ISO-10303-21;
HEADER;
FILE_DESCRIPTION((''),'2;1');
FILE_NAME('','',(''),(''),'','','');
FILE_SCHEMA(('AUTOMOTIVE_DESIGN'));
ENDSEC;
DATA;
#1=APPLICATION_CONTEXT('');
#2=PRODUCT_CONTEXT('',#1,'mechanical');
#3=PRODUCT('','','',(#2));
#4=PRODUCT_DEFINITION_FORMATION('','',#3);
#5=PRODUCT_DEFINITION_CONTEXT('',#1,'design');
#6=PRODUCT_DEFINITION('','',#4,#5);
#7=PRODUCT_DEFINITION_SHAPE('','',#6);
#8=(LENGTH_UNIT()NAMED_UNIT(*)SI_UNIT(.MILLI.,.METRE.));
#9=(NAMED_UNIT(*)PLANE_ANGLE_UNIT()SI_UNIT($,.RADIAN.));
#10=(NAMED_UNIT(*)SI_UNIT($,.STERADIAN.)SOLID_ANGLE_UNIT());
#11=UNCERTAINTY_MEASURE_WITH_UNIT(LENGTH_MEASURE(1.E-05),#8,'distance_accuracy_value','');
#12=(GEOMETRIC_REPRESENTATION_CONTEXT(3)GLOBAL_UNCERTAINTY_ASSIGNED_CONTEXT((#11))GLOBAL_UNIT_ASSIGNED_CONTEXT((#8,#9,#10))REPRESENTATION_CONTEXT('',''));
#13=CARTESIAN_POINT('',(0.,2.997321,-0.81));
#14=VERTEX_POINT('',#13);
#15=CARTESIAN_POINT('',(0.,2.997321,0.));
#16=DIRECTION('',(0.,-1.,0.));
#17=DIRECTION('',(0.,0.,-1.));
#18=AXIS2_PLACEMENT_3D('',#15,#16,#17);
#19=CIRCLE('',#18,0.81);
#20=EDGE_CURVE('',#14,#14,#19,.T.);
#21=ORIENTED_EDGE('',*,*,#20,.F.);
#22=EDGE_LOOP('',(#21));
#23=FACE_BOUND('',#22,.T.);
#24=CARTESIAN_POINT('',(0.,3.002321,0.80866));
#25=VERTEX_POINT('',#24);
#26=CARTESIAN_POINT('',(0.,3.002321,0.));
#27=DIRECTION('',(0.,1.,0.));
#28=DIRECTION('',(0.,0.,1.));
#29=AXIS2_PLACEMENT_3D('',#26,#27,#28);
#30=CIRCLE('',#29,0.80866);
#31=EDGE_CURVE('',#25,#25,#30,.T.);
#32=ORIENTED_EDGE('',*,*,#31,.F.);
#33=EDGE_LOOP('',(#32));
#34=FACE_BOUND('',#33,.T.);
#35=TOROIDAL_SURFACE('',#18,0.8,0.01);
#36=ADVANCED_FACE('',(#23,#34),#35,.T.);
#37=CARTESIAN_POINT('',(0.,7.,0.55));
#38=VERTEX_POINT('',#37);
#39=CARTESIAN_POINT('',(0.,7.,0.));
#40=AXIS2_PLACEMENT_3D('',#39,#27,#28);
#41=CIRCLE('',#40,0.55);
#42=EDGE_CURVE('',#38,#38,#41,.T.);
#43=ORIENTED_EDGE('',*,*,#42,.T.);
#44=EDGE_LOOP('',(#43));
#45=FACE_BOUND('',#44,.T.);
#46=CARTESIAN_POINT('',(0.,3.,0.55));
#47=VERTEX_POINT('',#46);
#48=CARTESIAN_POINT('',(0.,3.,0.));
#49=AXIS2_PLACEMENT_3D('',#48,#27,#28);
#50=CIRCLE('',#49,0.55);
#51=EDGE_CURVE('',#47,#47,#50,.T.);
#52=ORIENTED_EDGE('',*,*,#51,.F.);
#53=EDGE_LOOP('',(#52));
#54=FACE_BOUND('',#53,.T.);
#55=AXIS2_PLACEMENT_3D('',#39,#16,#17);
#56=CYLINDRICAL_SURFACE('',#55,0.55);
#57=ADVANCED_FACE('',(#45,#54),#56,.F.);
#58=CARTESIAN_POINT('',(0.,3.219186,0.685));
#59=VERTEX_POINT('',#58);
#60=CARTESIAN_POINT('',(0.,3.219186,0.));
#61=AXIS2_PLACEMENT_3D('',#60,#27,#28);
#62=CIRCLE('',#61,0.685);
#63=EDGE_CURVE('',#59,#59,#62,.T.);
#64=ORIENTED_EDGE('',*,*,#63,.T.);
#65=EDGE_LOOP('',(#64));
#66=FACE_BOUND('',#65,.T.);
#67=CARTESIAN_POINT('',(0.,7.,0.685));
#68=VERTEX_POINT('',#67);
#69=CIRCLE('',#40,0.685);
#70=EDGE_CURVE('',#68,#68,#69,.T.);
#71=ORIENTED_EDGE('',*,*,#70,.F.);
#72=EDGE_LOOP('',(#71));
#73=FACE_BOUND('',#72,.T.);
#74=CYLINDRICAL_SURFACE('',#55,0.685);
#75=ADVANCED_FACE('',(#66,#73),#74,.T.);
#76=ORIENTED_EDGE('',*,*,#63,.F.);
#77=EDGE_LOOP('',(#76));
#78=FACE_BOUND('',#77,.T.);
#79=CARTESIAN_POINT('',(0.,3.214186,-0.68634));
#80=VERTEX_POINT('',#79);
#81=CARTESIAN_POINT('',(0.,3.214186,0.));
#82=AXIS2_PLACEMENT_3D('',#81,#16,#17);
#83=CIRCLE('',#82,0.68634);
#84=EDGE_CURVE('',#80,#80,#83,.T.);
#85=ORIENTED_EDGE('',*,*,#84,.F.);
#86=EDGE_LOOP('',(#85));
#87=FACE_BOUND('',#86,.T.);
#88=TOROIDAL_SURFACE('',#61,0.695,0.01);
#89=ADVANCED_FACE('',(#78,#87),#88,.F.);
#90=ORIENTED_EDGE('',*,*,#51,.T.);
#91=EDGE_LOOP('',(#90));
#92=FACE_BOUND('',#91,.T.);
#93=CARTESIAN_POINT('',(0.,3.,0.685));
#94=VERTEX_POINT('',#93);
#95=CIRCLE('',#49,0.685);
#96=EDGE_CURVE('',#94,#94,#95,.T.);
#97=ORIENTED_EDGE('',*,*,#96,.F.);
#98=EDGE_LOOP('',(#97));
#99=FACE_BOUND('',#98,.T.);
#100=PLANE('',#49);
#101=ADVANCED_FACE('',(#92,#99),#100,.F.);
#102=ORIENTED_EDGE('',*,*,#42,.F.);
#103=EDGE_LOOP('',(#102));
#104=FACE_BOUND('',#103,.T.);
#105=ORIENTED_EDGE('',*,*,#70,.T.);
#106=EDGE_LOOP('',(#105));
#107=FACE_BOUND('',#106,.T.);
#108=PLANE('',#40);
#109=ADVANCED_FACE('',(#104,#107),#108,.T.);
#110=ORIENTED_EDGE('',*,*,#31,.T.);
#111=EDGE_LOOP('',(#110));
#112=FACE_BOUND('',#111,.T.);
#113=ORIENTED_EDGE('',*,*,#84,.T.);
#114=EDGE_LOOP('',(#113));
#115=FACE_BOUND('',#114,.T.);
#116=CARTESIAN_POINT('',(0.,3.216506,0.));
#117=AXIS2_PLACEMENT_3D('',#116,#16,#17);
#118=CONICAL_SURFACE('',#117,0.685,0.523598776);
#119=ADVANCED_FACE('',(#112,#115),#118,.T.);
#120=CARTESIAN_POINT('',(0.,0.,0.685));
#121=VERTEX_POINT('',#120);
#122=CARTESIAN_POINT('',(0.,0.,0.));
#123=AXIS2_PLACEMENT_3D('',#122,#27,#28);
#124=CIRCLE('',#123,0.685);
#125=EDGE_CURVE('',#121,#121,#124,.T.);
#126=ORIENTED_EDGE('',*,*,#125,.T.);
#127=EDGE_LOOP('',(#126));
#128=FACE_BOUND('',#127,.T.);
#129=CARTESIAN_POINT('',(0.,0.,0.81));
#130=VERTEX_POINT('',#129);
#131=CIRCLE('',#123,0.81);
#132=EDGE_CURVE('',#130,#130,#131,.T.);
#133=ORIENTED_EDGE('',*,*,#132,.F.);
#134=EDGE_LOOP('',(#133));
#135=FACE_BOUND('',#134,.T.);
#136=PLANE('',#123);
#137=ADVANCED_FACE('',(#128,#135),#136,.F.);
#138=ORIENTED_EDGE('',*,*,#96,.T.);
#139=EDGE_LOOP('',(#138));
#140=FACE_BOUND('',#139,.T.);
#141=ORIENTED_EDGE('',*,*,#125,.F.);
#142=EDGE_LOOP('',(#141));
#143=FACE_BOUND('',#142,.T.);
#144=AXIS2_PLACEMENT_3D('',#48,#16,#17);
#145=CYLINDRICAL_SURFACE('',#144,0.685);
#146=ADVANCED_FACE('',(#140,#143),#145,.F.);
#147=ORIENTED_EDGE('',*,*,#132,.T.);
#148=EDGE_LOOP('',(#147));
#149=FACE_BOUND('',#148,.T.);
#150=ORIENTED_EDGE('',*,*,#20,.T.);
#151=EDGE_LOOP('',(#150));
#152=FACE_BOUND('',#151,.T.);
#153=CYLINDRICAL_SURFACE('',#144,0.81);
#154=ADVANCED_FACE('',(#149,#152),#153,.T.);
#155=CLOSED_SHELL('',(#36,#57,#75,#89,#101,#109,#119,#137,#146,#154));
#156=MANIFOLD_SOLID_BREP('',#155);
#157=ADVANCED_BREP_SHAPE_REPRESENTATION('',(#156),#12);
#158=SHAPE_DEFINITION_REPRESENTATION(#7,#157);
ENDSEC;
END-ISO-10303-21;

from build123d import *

# Parameters (mm, degrees)
SKETCH1_R           = 0.81
SKETCH1_R_2         = 0.685
BOSS_EXTRUDE1_DEPTH = 3
SKETCH2_R           = 0.685
SKETCH2_R_2         = 0.55
BOSS_EXTRUDE2_DEPTH = 4
FILLET1_R           = 0.01
FILLET2_R           = 0.01


with BuildPart() as part:
    # Sketch1 → Boss-Extrude1 (new body)
    with BuildSketch(Plane(origin=(0, 0, 0), x_dir=(1, 0, 0), z_dir=(0, 1, 0))):
        Circle(SKETCH1_R)
        Circle(SKETCH1_R_2, mode=Mode.SUBTRACT)
    extrude(amount=BOSS_EXTRUDE1_DEPTH)


with BuildPart() as body_2:
    # Sketch2 → Boss-Extrude2 (new body)
    with BuildSketch(Plane(origin=(0, 3, 0), x_dir=(1, 0, 0), z_dir=(0, 1, 0))):
        Circle(SKETCH2_R)
        Circle(SKETCH2_R_2, mode=Mode.SUBTRACT)
    extrude(amount=BOSS_EXTRUDE2_DEPTH)


with BuildPart() as revolve1_tool:
    # Sketch3 → Revolve1 (revolve)
    with BuildSketch(Plane.XY):
        Polygon((-0.81, 3), (-0.685, 3.216506351), (-0.685, 3), align=None)
    revolve(axis=Axis((0, 0, 0), (0, 1, 0)))


with BuildPart() as part_1:
    add(part.part)


with BuildPart() as part_2:
    # Revolve1: joined with revolve1_tool
    add(part_1.part.fuse(revolve1_tool.part, body_2.part, tol=0.00001))

    # Fillet1
    fillet1_edges = [part_2.edges().sort_by_distance(p)[0] for p in [
        (0, 3, 0.81),
    ]]
    fillet(fillet1_edges, radius=FILLET1_R)

    # Fillet2
    fillet2_edges = [part_2.edges().sort_by_distance(p)[0] for p in [
        (0, 3.216506351, -0.685),
    ]]
    fillet(fillet2_edges, radius=FILLET2_R)


solid = part_2.part
